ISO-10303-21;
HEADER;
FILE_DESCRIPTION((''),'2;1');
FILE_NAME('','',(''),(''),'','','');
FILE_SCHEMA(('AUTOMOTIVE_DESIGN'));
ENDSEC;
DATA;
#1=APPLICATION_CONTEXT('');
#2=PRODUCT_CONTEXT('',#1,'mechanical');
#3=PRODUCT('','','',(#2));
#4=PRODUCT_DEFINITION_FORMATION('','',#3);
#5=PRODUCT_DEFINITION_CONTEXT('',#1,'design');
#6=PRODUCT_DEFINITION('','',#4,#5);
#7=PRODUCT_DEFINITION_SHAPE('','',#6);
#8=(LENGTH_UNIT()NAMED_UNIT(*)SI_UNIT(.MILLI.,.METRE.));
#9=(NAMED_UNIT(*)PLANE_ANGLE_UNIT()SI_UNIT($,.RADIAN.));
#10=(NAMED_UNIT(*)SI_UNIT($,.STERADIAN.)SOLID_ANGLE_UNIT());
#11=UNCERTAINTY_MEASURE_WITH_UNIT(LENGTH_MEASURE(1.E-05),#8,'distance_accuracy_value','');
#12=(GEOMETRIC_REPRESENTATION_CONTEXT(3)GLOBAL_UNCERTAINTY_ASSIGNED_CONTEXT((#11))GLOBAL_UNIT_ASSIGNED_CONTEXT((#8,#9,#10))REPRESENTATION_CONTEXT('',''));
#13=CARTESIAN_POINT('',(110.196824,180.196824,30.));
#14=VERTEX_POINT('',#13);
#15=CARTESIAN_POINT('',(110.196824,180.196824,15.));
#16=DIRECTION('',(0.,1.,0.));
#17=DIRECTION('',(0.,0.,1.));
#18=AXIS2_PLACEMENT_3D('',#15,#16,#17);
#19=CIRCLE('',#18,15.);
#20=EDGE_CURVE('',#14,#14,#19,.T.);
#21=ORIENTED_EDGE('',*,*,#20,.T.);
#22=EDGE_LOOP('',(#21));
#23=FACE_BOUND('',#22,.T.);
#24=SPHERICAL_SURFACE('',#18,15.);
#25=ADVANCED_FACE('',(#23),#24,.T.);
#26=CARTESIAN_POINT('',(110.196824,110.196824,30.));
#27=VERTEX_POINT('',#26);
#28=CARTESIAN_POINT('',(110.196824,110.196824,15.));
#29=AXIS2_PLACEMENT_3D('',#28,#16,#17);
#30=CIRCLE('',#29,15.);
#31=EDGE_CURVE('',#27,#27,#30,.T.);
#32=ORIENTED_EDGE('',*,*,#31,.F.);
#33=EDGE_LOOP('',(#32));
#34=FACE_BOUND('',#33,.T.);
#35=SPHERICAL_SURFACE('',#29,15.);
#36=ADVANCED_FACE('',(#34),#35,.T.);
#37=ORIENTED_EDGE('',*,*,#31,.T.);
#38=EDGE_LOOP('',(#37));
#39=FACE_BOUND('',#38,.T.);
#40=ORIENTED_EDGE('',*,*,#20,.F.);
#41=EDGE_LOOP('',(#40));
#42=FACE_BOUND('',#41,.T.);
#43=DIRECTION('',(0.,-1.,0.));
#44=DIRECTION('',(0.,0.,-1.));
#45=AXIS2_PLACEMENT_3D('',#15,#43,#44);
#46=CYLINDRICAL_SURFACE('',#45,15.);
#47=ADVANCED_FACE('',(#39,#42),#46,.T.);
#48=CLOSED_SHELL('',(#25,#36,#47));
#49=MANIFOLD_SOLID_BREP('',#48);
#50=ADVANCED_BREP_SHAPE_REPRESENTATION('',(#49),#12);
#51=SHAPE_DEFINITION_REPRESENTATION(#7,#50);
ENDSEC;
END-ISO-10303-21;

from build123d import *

# Parameters (mm, degrees)
SKETCH1_R           = 15
BOSS_EXTRUDE1_DEPTH = 70


with BuildPart() as part:
    # Sketch1 → Boss-Extrude1 (new body)
    with BuildSketch(Plane(origin=(0, 110.196823778, 0), x_dir=(1, 0, 0), z_dir=(0, 1, 0))):
        with Locations((110.196823778, -15)):
            Circle(SKETCH1_R)
    extrude(amount=BOSS_EXTRUDE1_DEPTH)

    # Sketch2 → Revolve1 (revolve)
    with BuildSketch(Plane(origin=(110.196823778, 0, 0), x_dir=(0, 0, -1), z_dir=(1, 0, 0))):
        with BuildLine():
            Line((-30, 180.196823778), (0, 180.196823778))
            ThreePointArc((0, 180.196823778), (-15, 195.196823778), (-30, 180.196823778))
        make_face()
    revolve(axis=Axis((110.196823778, 180.196823778, 0), (0, 0, 1)))

    # Sketch2<3> → Revolve2 (revolve)
    with BuildSketch(Plane(origin=(110.196823778, 0, 0), x_dir=(0, 0, -1), z_dir=(1, 0, 0))):
        with BuildLine():
            Line((0, 110.196823778), (-30, 110.196823778))
            ThreePointArc((-30, 110.196823778), (-15, 95.196823778), (0, 110.196823778))
        make_face()
    revolve(axis=Axis((110.196823778, 110.196823778, 30), (0, 0, -1)))


solid = part.part
